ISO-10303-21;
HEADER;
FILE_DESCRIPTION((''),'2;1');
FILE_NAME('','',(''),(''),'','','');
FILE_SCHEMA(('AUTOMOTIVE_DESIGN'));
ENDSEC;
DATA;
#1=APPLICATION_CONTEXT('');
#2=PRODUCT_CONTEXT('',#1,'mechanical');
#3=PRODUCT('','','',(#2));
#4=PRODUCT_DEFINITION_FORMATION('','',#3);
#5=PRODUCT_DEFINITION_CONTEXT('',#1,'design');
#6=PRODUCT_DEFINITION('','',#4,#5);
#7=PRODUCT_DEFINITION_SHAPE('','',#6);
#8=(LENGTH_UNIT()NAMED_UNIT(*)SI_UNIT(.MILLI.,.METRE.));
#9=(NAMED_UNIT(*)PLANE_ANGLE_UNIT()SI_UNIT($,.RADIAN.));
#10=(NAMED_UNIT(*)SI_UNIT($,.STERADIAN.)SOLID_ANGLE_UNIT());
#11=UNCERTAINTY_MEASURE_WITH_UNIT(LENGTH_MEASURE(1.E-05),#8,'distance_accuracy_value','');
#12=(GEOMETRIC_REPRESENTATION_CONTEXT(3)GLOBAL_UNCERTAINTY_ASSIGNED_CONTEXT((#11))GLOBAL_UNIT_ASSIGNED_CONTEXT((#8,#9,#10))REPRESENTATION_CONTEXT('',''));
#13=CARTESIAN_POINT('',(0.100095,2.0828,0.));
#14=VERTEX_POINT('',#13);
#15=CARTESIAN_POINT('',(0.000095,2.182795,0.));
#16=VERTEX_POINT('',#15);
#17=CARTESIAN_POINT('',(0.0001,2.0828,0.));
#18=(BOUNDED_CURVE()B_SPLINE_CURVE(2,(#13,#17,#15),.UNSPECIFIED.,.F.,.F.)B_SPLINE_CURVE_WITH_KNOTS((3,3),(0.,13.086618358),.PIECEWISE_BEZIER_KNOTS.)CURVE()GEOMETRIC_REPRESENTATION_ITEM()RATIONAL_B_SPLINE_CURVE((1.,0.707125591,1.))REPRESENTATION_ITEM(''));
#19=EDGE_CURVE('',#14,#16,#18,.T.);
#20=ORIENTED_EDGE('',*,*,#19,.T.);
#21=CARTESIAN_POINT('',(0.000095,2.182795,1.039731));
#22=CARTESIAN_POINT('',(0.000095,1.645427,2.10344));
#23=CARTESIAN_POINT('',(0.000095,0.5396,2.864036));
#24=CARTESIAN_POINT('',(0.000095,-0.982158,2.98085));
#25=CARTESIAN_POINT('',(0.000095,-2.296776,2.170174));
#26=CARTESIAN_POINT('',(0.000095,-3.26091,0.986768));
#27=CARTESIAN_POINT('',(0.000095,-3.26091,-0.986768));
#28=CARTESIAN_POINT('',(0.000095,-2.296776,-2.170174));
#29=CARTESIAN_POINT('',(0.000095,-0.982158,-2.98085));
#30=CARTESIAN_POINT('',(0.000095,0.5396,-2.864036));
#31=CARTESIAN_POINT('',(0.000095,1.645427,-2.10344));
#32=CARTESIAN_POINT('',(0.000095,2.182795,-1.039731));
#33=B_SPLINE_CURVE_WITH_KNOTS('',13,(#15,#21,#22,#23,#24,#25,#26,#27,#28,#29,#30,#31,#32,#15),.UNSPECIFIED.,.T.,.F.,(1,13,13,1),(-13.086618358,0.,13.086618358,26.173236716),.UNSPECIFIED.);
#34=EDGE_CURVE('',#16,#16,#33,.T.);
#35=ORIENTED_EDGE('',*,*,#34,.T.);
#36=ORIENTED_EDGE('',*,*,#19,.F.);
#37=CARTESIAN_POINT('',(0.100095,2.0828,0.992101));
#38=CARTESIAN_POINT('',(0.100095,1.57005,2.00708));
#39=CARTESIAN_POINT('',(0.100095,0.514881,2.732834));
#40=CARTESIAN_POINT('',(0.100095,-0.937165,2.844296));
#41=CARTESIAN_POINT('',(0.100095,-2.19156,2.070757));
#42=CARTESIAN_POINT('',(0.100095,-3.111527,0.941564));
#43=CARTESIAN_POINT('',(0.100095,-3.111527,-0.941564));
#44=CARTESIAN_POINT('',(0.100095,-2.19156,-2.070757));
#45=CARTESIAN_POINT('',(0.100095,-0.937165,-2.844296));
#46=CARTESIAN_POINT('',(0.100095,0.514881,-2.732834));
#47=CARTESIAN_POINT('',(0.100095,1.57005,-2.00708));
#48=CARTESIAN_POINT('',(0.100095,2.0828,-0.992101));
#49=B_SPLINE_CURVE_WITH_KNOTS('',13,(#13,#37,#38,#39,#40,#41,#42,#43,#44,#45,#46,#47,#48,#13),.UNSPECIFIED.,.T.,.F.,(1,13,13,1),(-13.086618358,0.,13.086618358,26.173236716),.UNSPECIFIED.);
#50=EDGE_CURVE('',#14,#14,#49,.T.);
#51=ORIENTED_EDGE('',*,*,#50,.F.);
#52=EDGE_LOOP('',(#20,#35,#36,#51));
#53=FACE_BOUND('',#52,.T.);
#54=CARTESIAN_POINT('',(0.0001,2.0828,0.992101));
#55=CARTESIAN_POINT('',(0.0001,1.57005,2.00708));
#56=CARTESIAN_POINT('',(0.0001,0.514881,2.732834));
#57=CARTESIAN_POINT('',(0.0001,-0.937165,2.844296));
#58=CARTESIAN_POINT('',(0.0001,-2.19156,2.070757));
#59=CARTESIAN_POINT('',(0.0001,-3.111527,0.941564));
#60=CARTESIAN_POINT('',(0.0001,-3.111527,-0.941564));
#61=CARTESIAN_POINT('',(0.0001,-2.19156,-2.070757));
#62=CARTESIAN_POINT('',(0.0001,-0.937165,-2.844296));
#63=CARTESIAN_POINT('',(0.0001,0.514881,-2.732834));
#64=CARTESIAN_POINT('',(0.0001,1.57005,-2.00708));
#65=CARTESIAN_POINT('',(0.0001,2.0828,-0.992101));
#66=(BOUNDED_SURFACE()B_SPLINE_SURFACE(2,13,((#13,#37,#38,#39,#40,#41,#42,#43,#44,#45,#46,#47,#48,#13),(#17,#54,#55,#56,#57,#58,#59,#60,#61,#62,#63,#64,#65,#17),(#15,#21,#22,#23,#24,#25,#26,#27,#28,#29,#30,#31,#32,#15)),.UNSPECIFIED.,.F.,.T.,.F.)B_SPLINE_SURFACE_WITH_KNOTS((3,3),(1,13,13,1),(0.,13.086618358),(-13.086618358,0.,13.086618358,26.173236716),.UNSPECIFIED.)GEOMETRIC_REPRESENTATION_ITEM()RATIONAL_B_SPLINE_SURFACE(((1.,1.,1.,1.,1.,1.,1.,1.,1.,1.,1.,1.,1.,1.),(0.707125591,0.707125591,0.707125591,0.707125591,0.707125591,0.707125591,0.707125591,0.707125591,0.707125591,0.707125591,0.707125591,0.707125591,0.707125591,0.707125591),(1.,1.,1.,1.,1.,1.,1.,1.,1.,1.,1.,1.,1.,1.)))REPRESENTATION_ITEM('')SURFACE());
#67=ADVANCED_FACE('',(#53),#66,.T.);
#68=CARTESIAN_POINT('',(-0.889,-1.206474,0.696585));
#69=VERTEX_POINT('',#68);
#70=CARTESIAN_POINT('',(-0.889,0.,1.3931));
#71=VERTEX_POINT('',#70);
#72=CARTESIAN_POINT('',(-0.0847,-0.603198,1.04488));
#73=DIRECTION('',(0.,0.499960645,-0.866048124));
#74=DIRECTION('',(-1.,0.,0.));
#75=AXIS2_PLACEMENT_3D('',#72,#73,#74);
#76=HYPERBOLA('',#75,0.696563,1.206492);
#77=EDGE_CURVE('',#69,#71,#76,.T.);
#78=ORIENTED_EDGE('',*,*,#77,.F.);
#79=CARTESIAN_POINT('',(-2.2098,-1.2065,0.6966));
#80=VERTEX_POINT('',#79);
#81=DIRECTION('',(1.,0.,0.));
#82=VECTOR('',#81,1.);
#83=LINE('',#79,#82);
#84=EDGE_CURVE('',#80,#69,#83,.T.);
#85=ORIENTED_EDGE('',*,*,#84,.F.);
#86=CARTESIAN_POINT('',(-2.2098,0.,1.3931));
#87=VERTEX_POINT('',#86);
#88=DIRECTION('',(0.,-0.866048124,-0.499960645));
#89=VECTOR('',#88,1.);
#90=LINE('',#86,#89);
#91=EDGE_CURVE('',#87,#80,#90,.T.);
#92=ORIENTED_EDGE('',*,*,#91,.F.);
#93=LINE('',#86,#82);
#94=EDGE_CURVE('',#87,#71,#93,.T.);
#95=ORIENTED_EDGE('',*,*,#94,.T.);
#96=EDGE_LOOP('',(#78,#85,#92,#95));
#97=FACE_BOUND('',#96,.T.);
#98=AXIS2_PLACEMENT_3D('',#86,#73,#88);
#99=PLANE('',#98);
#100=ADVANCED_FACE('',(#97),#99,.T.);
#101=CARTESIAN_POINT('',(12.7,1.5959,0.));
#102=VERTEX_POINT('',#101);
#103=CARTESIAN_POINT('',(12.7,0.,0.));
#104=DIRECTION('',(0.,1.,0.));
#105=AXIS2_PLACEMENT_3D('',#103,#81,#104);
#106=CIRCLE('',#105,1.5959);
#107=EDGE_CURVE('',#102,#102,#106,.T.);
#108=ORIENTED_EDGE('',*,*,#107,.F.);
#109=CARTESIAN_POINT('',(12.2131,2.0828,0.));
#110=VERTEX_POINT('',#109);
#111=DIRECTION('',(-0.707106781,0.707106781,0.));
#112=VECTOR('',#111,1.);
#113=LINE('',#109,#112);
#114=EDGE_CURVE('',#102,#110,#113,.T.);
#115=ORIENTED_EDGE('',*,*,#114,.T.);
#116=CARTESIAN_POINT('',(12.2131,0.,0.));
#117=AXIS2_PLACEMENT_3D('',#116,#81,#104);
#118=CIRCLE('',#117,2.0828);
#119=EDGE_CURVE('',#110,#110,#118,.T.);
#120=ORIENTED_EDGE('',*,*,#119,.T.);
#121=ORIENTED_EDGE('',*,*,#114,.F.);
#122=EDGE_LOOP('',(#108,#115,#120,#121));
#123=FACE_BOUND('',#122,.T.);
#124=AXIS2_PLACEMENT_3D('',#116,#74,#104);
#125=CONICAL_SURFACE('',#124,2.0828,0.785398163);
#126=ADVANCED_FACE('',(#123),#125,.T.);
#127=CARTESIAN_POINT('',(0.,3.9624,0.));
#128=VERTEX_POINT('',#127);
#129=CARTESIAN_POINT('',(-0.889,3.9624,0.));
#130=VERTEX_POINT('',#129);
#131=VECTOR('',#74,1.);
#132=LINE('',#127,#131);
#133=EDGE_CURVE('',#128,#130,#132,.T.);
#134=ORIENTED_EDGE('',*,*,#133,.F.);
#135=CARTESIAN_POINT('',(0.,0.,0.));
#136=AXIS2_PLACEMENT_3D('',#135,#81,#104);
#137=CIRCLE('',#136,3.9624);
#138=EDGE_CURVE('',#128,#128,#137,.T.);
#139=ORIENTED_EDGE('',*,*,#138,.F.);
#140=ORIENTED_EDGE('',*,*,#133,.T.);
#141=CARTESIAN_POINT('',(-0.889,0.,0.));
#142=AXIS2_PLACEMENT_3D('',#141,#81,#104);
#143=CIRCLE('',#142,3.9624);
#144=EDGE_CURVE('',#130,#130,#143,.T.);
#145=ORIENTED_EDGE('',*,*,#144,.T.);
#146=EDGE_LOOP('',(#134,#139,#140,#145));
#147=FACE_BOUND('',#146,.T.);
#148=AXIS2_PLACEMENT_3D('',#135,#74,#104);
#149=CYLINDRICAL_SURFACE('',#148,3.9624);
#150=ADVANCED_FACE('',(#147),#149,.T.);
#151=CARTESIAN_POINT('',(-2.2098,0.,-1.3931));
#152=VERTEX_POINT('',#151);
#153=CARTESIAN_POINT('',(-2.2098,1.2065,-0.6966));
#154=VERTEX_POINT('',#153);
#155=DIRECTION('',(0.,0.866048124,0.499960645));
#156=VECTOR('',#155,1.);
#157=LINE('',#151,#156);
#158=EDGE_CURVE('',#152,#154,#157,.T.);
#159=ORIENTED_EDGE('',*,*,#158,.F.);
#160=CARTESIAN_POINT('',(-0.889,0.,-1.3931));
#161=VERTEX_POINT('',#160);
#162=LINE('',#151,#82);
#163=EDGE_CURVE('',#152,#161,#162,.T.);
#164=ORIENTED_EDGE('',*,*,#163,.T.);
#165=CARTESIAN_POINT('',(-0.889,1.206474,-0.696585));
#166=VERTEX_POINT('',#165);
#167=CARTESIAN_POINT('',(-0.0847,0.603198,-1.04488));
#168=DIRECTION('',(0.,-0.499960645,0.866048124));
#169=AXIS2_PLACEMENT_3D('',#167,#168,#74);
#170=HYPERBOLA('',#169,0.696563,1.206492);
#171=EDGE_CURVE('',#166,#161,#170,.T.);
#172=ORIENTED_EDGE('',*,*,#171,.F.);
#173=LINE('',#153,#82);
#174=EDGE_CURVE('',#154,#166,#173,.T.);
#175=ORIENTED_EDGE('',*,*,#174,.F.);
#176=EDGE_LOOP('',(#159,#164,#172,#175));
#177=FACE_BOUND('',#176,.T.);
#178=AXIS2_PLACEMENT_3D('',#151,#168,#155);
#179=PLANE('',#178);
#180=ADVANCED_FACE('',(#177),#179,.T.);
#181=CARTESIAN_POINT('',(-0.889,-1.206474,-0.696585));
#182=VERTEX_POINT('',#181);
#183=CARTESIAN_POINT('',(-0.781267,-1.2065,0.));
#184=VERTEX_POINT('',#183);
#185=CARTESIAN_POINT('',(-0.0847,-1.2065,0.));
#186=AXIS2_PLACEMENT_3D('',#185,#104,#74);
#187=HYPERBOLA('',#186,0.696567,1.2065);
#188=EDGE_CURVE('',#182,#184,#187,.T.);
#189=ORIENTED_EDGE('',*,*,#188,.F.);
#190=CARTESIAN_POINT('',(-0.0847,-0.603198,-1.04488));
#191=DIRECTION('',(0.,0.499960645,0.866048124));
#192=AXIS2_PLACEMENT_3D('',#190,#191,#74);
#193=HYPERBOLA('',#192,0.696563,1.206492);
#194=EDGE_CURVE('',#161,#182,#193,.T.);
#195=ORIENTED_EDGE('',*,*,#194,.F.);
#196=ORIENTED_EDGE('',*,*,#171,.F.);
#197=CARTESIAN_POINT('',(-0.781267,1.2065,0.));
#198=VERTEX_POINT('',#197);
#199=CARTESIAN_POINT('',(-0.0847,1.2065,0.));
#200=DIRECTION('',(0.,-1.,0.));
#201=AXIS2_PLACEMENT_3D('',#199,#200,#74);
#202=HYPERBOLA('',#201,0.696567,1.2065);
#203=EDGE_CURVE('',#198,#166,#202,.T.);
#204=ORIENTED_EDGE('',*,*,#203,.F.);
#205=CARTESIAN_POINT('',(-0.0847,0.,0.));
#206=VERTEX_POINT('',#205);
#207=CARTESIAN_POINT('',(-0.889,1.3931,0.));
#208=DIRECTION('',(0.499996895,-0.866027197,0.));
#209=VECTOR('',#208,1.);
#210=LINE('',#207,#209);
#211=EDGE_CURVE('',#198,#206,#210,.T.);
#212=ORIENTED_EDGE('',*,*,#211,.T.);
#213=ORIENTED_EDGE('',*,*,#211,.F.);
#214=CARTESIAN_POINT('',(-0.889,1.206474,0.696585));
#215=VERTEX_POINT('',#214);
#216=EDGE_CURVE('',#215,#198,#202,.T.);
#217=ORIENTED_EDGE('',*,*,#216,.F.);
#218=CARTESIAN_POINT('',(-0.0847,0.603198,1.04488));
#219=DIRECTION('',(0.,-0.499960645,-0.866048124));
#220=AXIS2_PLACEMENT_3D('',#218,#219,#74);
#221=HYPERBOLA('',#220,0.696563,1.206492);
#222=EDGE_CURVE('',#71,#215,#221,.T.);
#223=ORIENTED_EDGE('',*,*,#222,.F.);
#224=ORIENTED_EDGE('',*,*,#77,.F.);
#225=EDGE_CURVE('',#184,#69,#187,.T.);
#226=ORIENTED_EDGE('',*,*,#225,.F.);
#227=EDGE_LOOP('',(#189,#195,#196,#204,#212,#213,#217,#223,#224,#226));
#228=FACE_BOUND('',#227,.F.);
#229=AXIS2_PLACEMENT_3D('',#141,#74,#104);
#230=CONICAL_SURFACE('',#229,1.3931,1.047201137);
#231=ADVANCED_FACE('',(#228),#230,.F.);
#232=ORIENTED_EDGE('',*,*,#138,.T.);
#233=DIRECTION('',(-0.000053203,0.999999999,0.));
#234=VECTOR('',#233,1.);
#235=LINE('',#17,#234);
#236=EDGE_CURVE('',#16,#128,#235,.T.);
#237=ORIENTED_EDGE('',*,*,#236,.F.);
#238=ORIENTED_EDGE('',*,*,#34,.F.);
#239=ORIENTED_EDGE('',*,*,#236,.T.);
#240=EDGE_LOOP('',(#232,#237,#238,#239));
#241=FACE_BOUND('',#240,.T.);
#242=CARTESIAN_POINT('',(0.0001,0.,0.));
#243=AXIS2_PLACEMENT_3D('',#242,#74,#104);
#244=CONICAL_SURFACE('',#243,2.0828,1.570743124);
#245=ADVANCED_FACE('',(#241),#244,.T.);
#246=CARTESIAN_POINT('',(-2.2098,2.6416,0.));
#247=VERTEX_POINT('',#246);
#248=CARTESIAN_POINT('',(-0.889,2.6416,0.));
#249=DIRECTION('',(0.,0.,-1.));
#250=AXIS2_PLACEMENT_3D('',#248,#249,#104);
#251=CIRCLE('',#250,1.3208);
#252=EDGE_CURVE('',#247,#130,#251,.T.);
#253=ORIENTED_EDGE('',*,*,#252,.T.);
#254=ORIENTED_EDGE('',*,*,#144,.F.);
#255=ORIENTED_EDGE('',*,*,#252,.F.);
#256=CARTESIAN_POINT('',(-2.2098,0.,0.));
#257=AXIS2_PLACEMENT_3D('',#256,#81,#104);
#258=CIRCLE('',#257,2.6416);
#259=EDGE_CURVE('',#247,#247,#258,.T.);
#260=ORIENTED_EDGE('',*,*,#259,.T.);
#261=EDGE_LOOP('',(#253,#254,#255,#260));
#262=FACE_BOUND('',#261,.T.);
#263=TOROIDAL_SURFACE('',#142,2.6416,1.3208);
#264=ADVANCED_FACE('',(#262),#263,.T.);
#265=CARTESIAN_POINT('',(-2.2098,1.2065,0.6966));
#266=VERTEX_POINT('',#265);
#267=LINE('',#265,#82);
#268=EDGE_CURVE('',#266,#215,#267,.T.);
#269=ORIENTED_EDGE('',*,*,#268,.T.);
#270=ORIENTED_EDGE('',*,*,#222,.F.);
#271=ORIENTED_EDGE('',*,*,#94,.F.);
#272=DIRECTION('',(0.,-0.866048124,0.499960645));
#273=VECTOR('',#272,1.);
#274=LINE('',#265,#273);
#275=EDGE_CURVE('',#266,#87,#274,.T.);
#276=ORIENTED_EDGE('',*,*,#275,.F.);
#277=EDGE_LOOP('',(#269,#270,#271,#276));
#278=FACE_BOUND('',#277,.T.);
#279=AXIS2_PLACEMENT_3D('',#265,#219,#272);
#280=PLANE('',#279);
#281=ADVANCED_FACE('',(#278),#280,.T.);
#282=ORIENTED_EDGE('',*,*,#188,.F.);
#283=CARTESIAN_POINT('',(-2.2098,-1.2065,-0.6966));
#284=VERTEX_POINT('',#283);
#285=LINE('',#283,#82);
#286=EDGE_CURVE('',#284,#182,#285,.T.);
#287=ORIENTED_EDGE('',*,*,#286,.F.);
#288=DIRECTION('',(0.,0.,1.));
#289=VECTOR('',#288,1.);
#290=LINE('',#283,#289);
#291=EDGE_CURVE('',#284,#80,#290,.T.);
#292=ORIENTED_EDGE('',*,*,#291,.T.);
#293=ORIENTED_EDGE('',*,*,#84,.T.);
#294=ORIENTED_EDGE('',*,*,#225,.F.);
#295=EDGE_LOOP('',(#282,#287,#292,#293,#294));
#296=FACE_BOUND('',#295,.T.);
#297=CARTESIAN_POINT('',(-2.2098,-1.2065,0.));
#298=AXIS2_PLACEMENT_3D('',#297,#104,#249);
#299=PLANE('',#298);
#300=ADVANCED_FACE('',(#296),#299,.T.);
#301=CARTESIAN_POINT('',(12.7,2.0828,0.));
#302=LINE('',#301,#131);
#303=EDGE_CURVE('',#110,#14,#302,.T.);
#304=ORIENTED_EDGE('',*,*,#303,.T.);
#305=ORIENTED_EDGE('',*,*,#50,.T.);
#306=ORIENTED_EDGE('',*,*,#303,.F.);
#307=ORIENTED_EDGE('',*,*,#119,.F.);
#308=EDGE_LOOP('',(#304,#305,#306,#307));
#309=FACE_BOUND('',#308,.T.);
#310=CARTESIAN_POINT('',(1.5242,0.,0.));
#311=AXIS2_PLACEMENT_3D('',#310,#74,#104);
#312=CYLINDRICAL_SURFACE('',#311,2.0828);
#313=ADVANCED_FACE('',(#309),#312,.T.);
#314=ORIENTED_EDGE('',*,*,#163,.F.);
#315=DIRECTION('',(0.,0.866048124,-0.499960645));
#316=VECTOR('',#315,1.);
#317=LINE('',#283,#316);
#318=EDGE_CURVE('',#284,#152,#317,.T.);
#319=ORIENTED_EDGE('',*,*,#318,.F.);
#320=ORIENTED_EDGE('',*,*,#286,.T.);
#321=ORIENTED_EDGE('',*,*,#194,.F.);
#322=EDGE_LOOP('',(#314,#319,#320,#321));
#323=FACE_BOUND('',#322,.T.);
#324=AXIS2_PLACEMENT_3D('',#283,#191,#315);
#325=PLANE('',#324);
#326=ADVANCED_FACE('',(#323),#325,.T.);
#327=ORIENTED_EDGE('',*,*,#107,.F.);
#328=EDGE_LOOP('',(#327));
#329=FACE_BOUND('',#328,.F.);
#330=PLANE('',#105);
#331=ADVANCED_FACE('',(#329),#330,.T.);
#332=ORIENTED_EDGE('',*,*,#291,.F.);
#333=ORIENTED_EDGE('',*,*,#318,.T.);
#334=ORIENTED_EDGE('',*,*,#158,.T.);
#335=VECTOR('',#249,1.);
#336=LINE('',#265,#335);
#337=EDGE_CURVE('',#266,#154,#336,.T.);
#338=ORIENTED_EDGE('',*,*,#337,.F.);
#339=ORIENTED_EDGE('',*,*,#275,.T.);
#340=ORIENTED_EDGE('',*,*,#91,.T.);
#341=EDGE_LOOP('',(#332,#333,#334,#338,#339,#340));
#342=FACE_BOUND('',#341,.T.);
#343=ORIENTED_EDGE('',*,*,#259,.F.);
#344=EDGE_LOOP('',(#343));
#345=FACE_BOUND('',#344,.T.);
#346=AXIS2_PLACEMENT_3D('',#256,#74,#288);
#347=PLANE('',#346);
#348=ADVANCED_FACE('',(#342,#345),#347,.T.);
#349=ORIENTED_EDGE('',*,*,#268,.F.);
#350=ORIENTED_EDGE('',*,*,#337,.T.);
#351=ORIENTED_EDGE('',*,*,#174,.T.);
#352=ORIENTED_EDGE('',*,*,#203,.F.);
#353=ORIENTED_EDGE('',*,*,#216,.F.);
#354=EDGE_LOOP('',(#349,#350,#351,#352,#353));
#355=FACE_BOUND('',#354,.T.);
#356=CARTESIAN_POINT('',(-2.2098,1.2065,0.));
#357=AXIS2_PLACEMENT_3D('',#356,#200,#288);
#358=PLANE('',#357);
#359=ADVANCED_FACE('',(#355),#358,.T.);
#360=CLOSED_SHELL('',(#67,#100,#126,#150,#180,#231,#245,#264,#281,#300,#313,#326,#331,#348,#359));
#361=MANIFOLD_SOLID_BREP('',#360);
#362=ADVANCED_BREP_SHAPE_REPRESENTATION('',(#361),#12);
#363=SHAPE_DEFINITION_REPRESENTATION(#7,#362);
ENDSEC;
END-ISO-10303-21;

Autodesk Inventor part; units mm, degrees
ref_plane "YZ Plane" through (0, 0, 0) normal (1, 0, 0) x (0, 1, 0)
ref_plane "XZ Plane" through (0, 0, 0) normal (0, 1, 0) x (-1, 0, 0)
sketch "Sketch1" plane through (0, 0, 0) normal (0, 0, 1) x (1, 0, 0)
  line L0 (-0.0847, 0) -> (12.7, 0)
  line L1 (12.7, 0) -> (12.7, 2.0828)
  line L2 (12.7, 2.0828) -> (1.5242, 2.0828)
  line L3 (1.5242, 2.0828) -> (0.0001, 2.0828)
  line L4 (0.0001, 2.0828) -> (0, 2.0828)
  line L5 (0, 2.0828) -> (0, 3.9624)
  line L6 (0, 3.9624) -> (-2.2098, 3.9624)
  line L7 (-2.2098, 3.9624) -> (-2.2098, 1.3931)
  line L8 (-2.2098, 1.3931) -> (-0.889, 1.3931)
  line L9 (-0.889, 1.3931) -> (-0.0847, 0)
  line L10 (-5.1918, 0) -> (15.682, 0) projected
  line L11 (0, -0.7925) -> (0, 4.7549) projected
  line L12 (1.5242, 2.0828) -> (0, 2.0828) construction
  dimension "d1" = 11.1758
  dimension "d2" = 1.5241
  dimension "d3" = 2.2098
  dimension "d4" = 1.3208
  dimension "d5" = 60
  dimension "d6" = 4.1656
  dimension "d7" = 4.1656
  dimension "d8" = 2.7863
  dimension "d9" = 7.9248
  dimension "d26" = 12.7
revolve "Body" add sketch "Sketch1" angle 360 about axis through (-0.0847, 0, 0) along (1, 0, 0)
sketch "Sketch2" plane through (-2.2098, 0, 0) normal (-1, 0, 0) x (0, 0, 1)
  circle A0 centre (0, 0) radius 1.3931 projected
  line L0 (0, -5.5474) -> (0, 5.5474) projected
  line L1 (-5.5474, 0) -> (5.5474, 0) projected
  line L2 (1.3931, 0) -> (0.6966, -1.2065)
  line L3 (0.6966, -1.2065) -> (-0.6966, -1.2065)
  line L4 (-0.6966, -1.2065) -> (-1.3931, 0)
  line L5 (-1.3931, 0) -> (-0.6966, 1.2065)
  line L6 (-0.6966, 1.2065) -> (0.6966, 1.2065)
  line L7 (0.6966, 1.2065) -> (1.3931, 0)
extrude "Slot" add sketch "Sketch2" against normal up to next contours L7 A0 | A0 L2 | L6 L0 A0 | A0 L0 L3 | L0 L6 A0 | A0 L3 L0 | L4 A0 | A0 L5
fillet "Fillet1" radius 1.3208 1 edges at (-2.2098, -3.9624, 0)
thread "Thread" size "8-32 UNC" class "2A" standard "ANSI Unified Screw Threads" length 11.1758
chamfer "Chamfer1" distance 0.4869 distance2 0.4869 1 edges at (12.7, -2.0828, 0) measured on face at (12.7, -0.1898, 0.4203)
ref_plane "Work Plane1" through (29, 0, 0) normal (0, -1, 0) x (1, 0, 0)
fillet "Fillet2" radius 0.1 1 edges at (0.0001, -2.0828, 0)
equation "\"d30\" = R"
equation "\"d17\" = RR"
equation "\"d13\" = GEL"
equation "\"d15\" = -0.5 * SPD + 0.5 * GD"
equation "\"d16\" = GUL"
equation "\"d1\" = GEL"
equation "\"d3\" = KOH"
equation "\"d4\" = INTI"
equation "\"d6\" = GD"
equation "\"d7\" = BDM"
equation "\"d8\" = 1.1547 * SW"
equation "\"d9\" = KOD"
equation "\"d26\" = NLG"
equation "\"GD\" = NND"
equation "\"NLG\" = 12.7"
equation "\"GEL\" = 11.1758"
equation "\"KOD\" = 7.9248"
equation "\"KOH\" = 2.2098"
equation "\"INTI\" = 1.3208"
equation "\"GAL\" = 1.524"
equation "\"GUL\" = 0.48692"
equation "\"BDM\" = NND"
equation "\"SW\" = 2.413"
equation "\"RR\" = 1.3208"
equation "\"SPD\" = GD1"
equation "\"R\" = 0.1"
equation "\"KR\" = 4.699"
equation "\"GD1\" = 3.19177"
equation "\"THREADDIA\" = 4.1656"
equation "\"FAWI\" = 45deg"
equation "\"KOH1\" = 1.3208"
equation "\"NND\" = 4.1656"
equation "\"TOA\" = 30deg"
equation "\"E0\" = 1.155 * SW"
properties part number "Unbrako - 8 x 1/2" material "Steel, Mild"
